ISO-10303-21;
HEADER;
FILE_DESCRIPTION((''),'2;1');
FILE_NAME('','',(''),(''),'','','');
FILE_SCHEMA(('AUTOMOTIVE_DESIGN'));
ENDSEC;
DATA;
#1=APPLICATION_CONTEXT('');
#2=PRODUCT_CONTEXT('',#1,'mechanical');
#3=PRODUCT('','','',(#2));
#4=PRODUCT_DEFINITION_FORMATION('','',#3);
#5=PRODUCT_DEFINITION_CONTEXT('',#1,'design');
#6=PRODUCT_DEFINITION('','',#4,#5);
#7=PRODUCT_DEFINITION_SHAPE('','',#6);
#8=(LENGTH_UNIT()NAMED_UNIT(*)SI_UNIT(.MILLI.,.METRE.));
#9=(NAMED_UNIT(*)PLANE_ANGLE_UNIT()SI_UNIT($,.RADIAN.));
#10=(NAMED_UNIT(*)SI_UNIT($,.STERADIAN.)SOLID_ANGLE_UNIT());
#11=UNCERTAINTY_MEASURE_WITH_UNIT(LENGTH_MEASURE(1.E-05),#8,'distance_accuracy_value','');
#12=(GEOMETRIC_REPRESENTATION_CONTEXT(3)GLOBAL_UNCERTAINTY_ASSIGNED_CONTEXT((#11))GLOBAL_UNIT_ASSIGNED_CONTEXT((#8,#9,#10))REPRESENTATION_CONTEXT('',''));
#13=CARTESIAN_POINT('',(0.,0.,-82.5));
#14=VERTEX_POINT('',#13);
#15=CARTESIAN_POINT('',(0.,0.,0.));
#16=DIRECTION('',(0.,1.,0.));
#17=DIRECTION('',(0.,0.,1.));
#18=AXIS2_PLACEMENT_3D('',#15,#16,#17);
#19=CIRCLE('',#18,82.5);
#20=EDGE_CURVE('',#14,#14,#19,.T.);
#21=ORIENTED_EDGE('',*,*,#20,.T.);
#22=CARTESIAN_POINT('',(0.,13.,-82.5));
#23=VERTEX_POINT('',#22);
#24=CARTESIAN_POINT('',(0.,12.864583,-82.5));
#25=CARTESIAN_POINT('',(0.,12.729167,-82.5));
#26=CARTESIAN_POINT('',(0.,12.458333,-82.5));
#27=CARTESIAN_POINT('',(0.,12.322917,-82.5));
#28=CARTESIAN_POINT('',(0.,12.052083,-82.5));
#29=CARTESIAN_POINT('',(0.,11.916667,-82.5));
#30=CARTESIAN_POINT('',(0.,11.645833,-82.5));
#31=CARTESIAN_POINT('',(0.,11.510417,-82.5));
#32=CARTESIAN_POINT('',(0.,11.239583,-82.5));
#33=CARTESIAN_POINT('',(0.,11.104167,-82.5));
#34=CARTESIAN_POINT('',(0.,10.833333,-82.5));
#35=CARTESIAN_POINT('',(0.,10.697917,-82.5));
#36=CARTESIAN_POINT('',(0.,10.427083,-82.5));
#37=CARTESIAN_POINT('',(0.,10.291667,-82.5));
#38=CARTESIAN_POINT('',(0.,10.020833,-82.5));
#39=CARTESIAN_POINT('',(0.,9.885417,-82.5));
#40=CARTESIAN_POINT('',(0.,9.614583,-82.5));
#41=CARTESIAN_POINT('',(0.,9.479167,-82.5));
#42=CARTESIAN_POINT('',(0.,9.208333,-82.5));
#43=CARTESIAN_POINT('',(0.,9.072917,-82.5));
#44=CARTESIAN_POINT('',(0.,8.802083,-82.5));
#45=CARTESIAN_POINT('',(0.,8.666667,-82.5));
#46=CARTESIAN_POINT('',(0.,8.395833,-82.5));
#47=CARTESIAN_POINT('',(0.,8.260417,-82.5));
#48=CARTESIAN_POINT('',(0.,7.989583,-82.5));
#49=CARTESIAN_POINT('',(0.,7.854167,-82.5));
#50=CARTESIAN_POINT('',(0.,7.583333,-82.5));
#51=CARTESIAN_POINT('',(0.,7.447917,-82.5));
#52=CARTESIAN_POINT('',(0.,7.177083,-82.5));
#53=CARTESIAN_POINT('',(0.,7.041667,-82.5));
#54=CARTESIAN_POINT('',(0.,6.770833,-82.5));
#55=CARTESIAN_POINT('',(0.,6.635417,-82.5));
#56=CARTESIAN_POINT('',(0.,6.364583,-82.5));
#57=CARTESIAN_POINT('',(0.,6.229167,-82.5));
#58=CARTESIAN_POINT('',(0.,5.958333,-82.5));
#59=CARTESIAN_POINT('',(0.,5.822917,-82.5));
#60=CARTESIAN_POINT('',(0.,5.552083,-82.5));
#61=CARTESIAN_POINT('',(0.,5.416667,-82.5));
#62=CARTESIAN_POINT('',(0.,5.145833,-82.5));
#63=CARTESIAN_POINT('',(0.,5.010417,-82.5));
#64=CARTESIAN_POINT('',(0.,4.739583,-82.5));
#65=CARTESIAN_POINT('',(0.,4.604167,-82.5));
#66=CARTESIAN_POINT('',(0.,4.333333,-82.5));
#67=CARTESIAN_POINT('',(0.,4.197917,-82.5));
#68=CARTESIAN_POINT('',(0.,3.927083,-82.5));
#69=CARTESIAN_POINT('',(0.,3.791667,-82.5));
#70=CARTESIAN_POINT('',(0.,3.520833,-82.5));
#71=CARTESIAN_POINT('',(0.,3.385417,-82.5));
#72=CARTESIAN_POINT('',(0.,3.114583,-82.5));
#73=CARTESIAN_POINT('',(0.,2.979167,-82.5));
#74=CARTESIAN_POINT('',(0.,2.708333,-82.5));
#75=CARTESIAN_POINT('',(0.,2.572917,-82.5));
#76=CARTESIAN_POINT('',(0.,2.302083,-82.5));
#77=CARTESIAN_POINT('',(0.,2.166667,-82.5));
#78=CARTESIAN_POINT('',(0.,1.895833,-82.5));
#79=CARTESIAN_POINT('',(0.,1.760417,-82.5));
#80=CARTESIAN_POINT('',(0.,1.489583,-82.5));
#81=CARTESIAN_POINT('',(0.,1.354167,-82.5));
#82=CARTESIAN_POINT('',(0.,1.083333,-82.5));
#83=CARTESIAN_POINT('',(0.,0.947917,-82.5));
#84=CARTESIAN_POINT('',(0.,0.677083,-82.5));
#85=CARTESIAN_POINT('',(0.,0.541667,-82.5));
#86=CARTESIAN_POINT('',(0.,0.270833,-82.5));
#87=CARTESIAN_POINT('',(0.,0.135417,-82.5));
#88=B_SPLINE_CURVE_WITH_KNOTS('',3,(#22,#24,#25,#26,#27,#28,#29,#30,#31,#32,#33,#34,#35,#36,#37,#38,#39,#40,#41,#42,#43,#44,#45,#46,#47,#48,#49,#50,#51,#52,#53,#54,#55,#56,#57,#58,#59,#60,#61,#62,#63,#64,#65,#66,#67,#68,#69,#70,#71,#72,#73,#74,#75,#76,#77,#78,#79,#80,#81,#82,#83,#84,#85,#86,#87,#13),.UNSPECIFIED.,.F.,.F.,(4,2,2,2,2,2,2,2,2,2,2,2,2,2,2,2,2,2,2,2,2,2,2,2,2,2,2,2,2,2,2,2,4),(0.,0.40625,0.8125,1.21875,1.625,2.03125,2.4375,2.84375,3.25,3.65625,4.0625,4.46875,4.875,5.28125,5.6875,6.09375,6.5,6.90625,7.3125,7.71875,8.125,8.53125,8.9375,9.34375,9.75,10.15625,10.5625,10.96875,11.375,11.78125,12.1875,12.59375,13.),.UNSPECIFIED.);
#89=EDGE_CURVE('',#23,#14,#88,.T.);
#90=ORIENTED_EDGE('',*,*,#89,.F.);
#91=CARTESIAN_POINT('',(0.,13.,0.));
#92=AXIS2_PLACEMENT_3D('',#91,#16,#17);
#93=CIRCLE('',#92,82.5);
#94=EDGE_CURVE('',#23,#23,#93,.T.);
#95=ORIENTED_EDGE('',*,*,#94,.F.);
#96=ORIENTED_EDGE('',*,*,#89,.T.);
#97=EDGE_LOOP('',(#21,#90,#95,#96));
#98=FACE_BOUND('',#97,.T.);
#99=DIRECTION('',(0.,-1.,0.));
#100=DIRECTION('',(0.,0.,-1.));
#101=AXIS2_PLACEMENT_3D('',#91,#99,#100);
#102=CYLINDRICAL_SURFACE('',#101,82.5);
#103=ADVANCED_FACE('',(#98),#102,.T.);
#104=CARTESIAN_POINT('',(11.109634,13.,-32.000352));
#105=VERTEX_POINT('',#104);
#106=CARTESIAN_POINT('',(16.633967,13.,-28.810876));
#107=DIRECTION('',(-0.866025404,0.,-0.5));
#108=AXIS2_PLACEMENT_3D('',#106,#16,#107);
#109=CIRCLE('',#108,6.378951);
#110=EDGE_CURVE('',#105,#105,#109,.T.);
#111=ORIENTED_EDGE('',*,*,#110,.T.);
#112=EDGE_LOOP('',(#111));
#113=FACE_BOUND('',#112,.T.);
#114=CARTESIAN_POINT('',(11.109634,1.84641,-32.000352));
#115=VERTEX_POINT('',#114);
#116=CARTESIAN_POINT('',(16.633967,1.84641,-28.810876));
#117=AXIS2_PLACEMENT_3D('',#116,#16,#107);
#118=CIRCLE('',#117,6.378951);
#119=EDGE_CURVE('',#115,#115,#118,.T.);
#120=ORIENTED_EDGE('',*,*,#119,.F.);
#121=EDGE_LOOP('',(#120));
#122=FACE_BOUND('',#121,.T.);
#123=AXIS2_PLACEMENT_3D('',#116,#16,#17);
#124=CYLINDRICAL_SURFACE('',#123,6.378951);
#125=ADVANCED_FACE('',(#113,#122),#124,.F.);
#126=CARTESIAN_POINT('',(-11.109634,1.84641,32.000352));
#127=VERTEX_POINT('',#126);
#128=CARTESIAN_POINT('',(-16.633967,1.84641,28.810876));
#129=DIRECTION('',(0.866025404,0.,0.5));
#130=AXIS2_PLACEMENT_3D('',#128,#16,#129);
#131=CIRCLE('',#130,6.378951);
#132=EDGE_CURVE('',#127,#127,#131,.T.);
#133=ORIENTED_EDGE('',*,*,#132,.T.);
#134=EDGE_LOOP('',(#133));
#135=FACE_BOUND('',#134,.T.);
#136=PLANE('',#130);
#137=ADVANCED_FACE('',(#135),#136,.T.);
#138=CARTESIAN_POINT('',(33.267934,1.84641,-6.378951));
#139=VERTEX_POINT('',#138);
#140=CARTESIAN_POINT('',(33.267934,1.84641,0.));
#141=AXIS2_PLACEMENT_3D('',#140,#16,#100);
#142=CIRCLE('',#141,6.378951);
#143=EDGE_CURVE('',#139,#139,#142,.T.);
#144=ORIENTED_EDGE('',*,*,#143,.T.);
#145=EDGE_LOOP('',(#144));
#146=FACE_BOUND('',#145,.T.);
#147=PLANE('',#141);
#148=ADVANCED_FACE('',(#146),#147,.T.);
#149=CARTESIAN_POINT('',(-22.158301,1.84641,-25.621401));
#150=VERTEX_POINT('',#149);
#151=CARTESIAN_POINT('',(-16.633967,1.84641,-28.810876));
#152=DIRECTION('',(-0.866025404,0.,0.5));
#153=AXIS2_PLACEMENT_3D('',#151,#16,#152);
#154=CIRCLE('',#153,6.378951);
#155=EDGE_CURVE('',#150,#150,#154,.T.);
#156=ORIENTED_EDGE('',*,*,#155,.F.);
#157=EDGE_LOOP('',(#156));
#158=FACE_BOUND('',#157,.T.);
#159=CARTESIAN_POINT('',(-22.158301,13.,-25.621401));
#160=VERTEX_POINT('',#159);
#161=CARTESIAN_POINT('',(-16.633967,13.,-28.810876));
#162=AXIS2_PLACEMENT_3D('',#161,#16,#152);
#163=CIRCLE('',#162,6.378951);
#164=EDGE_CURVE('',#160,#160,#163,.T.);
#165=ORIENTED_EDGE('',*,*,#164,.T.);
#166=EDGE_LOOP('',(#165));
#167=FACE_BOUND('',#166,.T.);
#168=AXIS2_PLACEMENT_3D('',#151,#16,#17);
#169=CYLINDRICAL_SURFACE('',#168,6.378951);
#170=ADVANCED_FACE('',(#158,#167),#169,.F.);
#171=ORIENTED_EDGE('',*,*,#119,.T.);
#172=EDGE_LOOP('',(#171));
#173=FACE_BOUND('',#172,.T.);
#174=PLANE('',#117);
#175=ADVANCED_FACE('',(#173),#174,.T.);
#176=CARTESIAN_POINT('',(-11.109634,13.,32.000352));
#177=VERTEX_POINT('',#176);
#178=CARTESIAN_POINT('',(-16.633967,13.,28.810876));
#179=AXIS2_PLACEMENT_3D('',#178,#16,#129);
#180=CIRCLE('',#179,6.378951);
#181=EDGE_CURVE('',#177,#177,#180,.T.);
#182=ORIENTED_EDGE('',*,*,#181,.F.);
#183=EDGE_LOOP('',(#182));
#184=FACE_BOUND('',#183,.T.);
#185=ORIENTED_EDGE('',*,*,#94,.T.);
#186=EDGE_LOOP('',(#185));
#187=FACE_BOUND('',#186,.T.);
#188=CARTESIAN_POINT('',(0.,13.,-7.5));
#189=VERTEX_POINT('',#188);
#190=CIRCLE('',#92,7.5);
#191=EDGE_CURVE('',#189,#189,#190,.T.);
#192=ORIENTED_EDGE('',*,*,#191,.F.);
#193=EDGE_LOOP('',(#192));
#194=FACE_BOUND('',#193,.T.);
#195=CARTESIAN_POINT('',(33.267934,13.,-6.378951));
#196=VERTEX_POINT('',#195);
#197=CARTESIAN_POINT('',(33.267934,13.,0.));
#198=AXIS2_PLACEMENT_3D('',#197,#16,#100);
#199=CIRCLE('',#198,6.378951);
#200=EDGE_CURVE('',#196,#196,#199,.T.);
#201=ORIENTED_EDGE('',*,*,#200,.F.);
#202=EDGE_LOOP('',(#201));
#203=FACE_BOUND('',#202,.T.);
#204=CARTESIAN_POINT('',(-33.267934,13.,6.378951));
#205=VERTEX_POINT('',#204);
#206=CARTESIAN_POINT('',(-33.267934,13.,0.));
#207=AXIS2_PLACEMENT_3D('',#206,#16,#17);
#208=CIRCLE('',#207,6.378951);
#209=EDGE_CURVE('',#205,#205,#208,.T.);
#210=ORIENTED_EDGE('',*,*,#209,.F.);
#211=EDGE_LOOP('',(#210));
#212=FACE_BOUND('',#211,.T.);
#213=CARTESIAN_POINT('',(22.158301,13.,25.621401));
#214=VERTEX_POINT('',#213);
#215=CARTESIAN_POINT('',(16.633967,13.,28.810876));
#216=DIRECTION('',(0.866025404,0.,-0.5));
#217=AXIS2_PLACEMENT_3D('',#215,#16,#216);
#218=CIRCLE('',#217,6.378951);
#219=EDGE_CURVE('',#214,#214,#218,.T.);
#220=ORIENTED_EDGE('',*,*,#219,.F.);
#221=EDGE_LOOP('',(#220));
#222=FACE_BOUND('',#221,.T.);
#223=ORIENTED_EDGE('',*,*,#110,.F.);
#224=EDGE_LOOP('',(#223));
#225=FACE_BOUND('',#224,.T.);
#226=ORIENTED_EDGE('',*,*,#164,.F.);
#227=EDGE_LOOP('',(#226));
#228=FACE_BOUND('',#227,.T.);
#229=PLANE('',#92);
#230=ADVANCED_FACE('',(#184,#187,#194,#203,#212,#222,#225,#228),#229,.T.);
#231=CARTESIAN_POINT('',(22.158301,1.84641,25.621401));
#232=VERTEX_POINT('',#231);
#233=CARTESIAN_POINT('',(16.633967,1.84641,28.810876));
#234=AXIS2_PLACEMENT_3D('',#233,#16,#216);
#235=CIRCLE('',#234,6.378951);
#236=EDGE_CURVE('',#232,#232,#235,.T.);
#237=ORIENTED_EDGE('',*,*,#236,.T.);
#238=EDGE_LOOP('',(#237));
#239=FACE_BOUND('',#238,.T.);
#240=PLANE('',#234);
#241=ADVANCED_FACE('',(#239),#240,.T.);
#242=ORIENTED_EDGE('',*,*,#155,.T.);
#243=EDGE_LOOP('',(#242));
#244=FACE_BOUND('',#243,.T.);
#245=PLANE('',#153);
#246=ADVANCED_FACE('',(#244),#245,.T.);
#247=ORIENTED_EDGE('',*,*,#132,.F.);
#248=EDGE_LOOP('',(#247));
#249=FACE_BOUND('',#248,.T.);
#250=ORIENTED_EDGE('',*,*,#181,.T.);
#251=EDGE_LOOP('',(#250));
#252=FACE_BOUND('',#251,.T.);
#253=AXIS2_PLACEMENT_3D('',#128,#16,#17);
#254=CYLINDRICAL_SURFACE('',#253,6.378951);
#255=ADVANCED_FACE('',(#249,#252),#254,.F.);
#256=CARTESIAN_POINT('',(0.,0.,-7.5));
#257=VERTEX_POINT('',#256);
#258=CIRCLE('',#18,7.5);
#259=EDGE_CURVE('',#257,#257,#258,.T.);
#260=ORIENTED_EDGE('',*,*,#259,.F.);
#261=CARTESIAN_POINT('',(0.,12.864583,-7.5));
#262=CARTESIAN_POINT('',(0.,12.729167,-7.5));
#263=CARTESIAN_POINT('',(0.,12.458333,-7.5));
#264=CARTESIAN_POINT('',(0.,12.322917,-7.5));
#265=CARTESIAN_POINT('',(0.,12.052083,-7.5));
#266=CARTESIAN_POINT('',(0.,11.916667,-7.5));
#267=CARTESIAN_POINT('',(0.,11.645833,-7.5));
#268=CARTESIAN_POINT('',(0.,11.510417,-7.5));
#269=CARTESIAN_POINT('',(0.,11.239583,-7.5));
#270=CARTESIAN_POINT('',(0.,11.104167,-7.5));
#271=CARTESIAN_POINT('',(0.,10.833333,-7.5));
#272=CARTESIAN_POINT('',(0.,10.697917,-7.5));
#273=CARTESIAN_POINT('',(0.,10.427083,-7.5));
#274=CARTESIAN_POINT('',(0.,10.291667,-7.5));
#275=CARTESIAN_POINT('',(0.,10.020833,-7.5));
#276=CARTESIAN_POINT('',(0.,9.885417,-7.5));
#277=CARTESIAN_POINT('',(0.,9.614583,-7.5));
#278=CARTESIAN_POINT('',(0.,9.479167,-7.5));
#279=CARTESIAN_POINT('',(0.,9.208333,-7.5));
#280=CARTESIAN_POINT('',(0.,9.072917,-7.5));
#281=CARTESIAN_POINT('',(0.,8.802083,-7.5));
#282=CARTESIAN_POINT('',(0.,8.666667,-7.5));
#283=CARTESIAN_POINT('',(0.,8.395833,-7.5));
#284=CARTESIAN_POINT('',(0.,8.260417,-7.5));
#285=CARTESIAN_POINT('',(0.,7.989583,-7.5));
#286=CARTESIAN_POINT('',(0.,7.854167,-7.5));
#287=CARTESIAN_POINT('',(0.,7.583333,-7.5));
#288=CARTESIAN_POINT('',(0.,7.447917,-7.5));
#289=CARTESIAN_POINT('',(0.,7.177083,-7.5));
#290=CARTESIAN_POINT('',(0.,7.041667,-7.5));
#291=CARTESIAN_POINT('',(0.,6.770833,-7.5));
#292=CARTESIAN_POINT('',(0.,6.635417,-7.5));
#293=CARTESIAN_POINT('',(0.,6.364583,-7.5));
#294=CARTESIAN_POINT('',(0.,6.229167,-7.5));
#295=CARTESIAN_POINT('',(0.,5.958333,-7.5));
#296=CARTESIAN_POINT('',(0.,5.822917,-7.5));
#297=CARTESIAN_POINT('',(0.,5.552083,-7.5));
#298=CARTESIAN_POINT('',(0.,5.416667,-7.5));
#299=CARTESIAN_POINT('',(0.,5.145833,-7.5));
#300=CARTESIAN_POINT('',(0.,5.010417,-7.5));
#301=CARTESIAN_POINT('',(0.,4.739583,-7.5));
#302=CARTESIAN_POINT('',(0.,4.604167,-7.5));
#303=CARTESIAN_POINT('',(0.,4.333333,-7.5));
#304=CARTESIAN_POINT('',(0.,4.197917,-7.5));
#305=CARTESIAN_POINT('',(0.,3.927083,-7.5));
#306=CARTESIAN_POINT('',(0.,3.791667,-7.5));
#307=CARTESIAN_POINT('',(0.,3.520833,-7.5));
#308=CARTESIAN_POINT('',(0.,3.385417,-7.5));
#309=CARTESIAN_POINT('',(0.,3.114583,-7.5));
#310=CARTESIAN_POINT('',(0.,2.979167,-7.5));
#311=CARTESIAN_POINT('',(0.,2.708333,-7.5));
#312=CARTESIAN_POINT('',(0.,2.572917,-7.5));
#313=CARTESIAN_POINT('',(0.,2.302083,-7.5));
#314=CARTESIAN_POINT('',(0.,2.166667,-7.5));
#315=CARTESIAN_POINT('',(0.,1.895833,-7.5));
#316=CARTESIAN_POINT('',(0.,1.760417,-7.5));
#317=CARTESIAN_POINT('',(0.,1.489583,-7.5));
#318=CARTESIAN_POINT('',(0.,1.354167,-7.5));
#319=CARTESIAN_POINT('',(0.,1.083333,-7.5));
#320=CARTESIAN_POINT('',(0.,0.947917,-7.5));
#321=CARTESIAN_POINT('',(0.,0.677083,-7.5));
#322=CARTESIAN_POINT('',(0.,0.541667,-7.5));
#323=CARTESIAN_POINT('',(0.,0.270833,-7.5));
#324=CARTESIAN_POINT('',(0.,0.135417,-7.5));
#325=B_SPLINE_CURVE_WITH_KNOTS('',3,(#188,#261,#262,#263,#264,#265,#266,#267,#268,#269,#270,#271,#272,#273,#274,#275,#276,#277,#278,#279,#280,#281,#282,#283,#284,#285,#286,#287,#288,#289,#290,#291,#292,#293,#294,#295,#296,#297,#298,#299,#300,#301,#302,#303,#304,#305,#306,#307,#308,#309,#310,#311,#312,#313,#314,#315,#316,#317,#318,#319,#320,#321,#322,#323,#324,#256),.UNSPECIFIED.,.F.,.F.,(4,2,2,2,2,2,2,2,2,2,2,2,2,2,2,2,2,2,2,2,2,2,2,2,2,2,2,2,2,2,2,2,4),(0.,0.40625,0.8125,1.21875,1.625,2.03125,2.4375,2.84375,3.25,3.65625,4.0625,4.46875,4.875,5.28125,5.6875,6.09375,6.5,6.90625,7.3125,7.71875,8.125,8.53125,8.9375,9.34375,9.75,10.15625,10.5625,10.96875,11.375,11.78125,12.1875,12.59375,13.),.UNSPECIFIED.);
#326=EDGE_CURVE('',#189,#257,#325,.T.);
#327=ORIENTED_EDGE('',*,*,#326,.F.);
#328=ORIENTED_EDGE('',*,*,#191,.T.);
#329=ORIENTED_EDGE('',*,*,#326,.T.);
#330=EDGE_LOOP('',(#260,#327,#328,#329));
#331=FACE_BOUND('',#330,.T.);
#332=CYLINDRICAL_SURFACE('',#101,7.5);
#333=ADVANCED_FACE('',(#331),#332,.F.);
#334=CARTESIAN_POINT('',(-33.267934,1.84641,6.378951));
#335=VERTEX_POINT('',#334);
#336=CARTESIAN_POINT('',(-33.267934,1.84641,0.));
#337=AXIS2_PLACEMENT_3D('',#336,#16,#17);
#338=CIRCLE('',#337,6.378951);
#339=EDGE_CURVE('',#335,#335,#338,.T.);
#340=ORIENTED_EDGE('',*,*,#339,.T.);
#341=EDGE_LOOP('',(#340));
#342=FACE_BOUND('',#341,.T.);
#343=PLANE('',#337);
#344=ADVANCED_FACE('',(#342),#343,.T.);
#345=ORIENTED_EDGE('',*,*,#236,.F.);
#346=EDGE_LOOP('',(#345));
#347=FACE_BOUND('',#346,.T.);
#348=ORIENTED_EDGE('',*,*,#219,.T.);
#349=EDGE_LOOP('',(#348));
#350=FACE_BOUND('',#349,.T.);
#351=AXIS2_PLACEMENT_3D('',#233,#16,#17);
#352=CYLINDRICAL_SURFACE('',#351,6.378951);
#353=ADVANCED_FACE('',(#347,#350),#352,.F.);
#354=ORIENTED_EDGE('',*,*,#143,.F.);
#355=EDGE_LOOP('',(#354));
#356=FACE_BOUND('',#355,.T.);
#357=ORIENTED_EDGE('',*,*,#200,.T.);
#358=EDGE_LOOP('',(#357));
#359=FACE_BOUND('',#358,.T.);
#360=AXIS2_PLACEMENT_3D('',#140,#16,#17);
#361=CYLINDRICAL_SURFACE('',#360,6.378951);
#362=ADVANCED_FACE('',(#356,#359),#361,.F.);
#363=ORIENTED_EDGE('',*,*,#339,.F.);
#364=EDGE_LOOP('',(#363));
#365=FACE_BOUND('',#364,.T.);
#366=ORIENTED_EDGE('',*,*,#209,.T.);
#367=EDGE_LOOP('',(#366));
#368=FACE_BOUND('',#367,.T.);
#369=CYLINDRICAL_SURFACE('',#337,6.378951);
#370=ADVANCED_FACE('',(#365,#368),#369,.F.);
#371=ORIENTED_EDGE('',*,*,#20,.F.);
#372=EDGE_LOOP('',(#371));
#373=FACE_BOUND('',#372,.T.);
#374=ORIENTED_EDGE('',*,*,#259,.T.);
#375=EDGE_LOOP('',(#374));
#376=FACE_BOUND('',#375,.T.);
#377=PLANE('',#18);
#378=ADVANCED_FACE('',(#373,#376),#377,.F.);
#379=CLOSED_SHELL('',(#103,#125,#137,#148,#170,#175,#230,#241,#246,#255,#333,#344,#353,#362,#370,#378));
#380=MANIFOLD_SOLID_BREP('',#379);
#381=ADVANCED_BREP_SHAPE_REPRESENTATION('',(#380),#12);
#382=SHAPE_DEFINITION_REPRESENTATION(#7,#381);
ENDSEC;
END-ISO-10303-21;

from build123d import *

# Parameters (mm, degrees)
SKETCH1_R           = 82.5
BOSS_EXTRUDE1_DEPTH = 13
SKETCH2_R           = 7.5
CUT_EXTRUDE1_DEPTH  = 118.394633608
SKETCH3_R           = 6.378950811
CUT_EXTRUDE2_DEPTH  = 11.153590283
CIRPATTERN1_COUNT   = 6


with BuildPart() as part:
    # Sketch1 → Boss-Extrude1 (new body)
    with BuildSketch(Plane(origin=(0, 0, 0), x_dir=(1, 0, 0), z_dir=(0, 1, 0))):
        Circle(SKETCH1_R)
    extrude(amount=BOSS_EXTRUDE1_DEPTH)

    # Sketch2 → Cut-Extrude1 (cut, through all)
    with BuildSketch(Plane(origin=(0, 0, 0), x_dir=(1, 0, 0), z_dir=(0, 1, 0))):
        Circle(SKETCH2_R)
    extrude(amount=CUT_EXTRUDE1_DEPTH, mode=Mode.SUBTRACT)

    # Sketch3 → Cut-Extrude2 (cut)
    with BuildSketch(Plane(origin=(0, 13, 0), x_dir=(1, 0, 0), z_dir=(0, 1, 0))):
        with Locations((-33.267934401, 0)):
            Circle(SKETCH3_R)
    cut_extrude2 = extrude(amount=-CUT_EXTRUDE2_DEPTH, mode=Mode.SUBTRACT)

    # CirPattern1: Cut-Extrude2 ×6 about axis
    cirpattern1_axis = Axis((0, 0, 0), (0, 1, 0))
    for i in range(1, CIRPATTERN1_COUNT):
        add(cut_extrude2.rotate(cirpattern1_axis, i * 360 / CIRPATTERN1_COUNT), mode=Mode.SUBTRACT)


solid = part.part
